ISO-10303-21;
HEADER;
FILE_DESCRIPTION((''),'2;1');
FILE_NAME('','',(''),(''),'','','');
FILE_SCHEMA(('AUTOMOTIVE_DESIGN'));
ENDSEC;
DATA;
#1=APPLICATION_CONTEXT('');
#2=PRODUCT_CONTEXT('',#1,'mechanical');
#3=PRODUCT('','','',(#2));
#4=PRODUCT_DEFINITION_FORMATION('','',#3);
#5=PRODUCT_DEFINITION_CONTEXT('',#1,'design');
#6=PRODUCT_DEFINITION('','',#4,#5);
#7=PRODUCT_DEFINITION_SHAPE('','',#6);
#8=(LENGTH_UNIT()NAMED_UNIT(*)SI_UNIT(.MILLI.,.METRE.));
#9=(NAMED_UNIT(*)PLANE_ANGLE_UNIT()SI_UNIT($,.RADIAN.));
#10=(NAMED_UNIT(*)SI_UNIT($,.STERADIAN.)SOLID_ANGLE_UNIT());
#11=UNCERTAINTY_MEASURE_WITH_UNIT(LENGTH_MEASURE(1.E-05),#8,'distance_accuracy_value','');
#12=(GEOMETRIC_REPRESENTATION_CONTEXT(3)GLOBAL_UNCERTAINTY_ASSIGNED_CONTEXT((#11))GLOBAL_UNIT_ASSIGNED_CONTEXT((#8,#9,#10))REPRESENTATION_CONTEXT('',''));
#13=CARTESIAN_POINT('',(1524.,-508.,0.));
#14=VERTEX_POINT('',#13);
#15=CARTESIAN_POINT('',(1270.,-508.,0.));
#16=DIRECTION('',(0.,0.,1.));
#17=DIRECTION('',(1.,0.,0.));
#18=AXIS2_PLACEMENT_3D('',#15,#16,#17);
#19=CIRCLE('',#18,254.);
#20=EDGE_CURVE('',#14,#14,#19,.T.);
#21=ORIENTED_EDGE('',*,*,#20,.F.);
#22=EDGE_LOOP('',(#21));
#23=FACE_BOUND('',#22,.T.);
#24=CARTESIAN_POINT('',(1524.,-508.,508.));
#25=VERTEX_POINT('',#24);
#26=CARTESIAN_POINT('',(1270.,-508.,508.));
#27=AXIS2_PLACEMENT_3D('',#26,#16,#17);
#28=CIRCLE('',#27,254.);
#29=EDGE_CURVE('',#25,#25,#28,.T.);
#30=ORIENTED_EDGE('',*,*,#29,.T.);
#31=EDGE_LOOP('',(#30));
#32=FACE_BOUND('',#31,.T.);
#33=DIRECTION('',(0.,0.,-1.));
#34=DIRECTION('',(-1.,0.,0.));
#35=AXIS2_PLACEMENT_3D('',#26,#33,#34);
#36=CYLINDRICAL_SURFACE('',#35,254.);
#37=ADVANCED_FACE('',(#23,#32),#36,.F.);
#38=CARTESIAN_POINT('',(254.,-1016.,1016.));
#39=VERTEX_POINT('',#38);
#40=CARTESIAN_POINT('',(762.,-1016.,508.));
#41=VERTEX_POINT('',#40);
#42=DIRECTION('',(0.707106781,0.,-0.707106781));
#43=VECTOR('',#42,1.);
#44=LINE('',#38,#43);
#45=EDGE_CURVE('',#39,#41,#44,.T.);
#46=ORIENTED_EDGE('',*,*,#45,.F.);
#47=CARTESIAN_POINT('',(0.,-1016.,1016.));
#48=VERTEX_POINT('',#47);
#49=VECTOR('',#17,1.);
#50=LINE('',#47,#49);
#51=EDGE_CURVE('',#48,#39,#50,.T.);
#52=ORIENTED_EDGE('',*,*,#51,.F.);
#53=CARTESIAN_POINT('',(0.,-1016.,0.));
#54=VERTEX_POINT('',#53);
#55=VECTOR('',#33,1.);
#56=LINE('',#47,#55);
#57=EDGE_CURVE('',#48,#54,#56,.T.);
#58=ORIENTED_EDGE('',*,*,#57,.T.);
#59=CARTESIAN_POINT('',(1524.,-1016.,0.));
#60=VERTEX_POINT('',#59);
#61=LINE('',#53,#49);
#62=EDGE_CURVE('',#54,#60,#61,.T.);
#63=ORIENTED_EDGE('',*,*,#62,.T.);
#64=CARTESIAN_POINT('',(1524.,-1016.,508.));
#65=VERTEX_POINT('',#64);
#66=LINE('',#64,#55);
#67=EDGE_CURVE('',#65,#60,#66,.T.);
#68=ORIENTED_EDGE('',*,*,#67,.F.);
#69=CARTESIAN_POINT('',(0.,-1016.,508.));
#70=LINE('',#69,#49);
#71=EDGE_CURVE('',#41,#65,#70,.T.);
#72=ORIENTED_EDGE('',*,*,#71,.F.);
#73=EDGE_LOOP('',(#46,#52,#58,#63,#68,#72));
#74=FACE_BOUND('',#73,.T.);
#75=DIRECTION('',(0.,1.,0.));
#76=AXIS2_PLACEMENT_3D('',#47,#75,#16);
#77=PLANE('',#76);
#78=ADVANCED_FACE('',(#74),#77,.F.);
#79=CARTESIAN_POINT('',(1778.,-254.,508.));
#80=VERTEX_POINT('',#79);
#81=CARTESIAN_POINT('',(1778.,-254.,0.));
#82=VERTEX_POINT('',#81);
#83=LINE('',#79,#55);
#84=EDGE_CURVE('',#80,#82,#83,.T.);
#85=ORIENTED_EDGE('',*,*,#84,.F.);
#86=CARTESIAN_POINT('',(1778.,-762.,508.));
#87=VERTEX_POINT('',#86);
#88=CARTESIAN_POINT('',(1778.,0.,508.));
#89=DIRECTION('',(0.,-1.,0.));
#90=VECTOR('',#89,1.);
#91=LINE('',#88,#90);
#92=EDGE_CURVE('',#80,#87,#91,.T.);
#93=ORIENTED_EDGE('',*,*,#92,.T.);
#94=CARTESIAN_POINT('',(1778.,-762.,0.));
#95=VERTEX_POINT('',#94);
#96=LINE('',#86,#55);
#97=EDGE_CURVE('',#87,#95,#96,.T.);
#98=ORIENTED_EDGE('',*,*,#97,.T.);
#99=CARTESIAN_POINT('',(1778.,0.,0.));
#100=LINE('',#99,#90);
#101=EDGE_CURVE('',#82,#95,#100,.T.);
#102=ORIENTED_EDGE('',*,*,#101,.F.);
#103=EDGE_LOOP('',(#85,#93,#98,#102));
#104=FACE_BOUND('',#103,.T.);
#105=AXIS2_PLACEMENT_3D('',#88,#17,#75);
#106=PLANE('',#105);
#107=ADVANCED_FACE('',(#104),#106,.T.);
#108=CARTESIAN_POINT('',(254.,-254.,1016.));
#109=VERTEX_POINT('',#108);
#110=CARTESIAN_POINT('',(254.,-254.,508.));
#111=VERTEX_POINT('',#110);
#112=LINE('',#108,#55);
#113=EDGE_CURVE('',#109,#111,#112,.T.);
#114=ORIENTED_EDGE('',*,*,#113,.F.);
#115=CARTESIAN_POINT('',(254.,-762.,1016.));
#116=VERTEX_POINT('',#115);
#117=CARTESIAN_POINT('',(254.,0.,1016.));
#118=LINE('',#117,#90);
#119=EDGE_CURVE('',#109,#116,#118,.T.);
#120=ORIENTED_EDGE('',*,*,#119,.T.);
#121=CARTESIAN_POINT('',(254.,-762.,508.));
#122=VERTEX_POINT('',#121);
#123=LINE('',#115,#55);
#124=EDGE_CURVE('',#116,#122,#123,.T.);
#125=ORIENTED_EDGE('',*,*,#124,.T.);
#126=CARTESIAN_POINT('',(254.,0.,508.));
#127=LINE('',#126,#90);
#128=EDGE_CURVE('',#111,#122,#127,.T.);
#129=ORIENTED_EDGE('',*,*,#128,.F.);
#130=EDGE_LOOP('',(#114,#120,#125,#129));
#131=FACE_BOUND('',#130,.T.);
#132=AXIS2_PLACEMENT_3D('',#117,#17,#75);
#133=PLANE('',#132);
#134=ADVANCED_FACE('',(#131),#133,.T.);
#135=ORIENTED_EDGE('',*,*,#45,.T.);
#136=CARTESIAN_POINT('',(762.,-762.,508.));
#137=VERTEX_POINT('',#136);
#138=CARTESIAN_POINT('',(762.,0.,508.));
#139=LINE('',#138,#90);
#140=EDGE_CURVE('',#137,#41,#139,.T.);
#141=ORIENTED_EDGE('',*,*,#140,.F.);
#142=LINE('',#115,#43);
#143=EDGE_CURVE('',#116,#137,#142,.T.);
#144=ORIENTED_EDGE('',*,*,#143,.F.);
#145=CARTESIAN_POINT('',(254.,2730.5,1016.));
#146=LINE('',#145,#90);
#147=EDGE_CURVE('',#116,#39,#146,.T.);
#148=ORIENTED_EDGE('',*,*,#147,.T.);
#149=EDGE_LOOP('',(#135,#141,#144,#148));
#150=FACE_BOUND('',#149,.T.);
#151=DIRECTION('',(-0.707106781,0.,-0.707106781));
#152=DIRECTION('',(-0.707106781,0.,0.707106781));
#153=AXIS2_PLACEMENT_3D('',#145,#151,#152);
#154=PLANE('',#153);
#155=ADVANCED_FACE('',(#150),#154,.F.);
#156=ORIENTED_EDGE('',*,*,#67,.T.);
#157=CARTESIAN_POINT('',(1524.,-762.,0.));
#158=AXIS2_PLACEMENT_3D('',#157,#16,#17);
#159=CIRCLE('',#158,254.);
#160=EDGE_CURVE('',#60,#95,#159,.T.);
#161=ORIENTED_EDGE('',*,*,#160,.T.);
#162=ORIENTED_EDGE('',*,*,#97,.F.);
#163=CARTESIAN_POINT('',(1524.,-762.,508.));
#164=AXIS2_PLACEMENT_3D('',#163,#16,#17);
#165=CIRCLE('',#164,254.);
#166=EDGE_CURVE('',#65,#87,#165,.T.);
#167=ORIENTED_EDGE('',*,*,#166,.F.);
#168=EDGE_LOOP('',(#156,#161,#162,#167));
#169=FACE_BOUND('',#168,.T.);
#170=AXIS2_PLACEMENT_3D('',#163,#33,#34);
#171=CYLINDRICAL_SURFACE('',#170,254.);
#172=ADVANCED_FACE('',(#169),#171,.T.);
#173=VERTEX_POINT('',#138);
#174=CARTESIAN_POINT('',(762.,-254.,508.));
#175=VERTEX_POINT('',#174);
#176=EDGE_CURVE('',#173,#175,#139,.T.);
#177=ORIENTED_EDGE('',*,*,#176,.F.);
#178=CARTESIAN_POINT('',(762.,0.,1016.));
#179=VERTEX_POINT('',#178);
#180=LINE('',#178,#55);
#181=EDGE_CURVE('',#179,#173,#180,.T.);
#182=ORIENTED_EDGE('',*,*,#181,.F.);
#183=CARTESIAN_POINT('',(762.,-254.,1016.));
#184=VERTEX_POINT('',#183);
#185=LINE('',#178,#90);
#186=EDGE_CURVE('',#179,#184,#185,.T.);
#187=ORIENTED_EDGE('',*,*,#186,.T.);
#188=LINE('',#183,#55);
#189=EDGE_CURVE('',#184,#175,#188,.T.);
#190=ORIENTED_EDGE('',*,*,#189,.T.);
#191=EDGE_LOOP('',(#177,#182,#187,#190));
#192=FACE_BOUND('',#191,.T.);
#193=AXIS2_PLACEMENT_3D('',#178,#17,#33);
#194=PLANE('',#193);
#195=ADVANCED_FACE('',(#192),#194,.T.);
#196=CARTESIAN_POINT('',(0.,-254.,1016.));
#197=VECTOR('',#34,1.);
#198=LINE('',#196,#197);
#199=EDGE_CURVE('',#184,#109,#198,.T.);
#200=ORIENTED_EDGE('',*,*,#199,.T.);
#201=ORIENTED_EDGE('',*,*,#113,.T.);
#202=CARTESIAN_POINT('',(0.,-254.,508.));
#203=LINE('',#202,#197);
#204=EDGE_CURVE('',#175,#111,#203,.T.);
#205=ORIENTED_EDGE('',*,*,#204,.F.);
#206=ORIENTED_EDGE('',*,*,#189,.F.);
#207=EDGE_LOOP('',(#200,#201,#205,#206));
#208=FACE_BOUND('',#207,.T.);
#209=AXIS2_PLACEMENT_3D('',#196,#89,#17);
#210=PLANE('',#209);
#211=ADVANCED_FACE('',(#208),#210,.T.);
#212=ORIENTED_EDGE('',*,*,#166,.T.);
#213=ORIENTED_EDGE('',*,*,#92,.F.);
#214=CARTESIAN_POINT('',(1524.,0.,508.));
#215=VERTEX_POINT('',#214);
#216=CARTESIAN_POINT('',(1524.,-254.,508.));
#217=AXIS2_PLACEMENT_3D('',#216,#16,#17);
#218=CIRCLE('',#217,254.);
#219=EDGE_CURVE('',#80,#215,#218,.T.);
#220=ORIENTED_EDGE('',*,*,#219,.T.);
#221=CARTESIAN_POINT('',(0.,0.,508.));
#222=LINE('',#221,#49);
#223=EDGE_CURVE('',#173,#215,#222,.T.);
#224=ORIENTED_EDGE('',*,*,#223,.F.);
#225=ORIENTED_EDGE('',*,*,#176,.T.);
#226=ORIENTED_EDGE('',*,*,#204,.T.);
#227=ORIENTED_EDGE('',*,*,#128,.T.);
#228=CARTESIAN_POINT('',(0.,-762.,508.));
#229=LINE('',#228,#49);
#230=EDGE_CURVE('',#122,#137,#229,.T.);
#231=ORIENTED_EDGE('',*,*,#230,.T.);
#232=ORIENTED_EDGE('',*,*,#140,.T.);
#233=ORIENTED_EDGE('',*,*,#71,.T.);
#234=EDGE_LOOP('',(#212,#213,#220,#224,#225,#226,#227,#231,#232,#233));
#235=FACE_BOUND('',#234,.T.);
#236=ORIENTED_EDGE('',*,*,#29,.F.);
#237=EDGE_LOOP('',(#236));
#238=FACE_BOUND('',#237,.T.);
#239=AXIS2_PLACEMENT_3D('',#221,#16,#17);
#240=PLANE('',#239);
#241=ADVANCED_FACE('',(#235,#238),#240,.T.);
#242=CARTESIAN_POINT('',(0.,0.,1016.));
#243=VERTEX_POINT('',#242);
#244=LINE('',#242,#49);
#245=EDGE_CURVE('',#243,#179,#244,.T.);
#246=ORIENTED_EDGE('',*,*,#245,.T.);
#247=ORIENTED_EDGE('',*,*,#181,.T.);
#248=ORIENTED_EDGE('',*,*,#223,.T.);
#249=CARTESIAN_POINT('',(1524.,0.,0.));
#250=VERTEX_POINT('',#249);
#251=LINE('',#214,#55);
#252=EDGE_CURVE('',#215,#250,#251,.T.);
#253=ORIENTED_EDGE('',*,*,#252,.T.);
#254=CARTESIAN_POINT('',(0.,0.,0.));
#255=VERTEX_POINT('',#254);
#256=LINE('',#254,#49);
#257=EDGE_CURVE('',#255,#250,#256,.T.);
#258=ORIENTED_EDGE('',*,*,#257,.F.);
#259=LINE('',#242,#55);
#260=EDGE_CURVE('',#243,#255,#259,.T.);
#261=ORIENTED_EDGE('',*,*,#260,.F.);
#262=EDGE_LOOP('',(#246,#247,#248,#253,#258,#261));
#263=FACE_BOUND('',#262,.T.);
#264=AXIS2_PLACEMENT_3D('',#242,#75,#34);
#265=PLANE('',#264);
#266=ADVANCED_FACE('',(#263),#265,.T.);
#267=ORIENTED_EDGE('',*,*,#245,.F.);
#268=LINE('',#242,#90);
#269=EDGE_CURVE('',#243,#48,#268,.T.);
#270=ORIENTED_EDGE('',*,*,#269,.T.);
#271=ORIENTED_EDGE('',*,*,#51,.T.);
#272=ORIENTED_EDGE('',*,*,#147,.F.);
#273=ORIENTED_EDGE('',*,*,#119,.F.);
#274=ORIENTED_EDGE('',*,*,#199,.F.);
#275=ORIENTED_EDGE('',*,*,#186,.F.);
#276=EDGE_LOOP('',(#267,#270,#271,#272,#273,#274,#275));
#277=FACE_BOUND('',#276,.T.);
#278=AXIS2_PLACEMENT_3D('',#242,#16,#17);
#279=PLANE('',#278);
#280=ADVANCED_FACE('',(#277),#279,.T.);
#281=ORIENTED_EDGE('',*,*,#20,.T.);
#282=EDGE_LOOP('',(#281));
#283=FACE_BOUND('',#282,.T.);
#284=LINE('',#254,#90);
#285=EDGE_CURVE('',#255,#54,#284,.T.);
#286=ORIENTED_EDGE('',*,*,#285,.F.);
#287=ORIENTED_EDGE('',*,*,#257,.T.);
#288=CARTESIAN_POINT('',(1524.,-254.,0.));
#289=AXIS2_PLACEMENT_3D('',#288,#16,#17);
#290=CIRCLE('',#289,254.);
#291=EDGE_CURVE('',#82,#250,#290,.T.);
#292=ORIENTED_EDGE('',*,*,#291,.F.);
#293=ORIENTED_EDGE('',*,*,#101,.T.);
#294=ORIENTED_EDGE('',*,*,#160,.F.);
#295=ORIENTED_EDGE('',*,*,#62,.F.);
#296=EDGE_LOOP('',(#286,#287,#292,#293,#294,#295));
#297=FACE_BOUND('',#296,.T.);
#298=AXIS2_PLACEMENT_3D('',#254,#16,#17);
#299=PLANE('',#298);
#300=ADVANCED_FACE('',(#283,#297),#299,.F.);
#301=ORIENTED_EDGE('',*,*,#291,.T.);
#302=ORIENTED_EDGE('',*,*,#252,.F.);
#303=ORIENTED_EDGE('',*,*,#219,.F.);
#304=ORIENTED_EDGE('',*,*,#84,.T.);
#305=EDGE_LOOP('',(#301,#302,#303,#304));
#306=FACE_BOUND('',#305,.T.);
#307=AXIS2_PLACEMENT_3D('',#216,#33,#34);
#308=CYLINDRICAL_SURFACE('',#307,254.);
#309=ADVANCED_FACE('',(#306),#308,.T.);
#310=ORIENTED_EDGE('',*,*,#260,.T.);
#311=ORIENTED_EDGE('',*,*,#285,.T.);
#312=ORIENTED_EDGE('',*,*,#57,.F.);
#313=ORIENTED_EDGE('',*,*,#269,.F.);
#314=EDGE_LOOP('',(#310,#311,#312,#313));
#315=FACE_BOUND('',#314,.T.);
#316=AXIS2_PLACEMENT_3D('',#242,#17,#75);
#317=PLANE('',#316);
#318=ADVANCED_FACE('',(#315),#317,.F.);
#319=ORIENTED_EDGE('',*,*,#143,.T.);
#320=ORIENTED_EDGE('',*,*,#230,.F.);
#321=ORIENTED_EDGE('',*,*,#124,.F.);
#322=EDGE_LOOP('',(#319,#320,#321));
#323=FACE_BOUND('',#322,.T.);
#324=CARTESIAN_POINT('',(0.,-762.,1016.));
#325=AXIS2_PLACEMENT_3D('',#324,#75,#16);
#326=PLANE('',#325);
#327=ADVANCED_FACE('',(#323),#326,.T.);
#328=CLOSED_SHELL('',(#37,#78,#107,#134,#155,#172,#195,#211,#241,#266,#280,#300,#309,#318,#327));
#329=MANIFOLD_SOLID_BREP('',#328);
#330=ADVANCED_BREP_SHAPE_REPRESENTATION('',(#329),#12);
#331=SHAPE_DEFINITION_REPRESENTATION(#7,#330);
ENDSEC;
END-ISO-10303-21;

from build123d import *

# Parameters (mm, degrees)
BOSS_EXTRUDE1_DEPTH = 1016
SKETCH1_4_W         = 508
SKETCH1_4_H         = 254
BOSS_EXTRUDE2_DEPTH = 1016
SKETCH1_5_R         = 254
BOSS_EXTRUDE3_DEPTH = 508
CUT_EXTRUDE4_START  = -254
CUT_EXTRUDE4_DEPTH  = 254


# Read off the part's stored shape, not the designer's step: Cut-Extrude4
with BuildPart() as part:
    # Sketch1 → Boss-Extrude1 (new body)
    with BuildSketch(Plane.XY):
        Polygon((762, 0), (0, 0), (0, -1016), (254, -1016), (254, -762), (254, -254), (762, -254), align=None)
    extrude(amount=BOSS_EXTRUDE1_DEPTH)

    # Sketch1<4> → Boss-Extrude2 (add)
    with BuildSketch(Plane.XY):
        with Locations((508, -889)):
            Rectangle(SKETCH1_4_W, SKETCH1_4_H)
    extrude(amount=BOSS_EXTRUDE2_DEPTH)

    # Sketch1<5> → Boss-Extrude3 (add)
    with BuildSketch(Plane.XY):
        with BuildLine():
            Line((1524, 0), (762, 0))
            Line((762, 0), (762, -254))
            Line((762, -254), (254, -254))
            Line((254, -254), (254, -762))
            Line((254, -762), (762, -762))
            Line((762, -762), (762, -1016))
            Line((762, -1016), (1524, -1016))
            ThreePointArc((1524, -1016), (1703.605122421, -941.605122421), (1778, -762))
            Line((1778, -762), (1778, -254))
            ThreePointArc((1778, -254), (1703.605122421, -74.394877579), (1524, 0))
        make_face()
        with Locations((1270, -508)):
            Circle(SKETCH1_5_R, mode=Mode.SUBTRACT)
    extrude(amount=BOSS_EXTRUDE3_DEPTH)

    # Cut-Extrude4 outline → Cut-Extrude4 (cut)
    with BuildSketch(Plane(origin=(0, -762, 0), x_dir=(1, 0, 0), z_dir=(0, 1, 0)).offset(CUT_EXTRUDE4_START)):
        Polygon((762, -1016), (762, -508), (254, -1016), align=None)
    extrude(amount=CUT_EXTRUDE4_DEPTH, mode=Mode.SUBTRACT)


solid = part.part
